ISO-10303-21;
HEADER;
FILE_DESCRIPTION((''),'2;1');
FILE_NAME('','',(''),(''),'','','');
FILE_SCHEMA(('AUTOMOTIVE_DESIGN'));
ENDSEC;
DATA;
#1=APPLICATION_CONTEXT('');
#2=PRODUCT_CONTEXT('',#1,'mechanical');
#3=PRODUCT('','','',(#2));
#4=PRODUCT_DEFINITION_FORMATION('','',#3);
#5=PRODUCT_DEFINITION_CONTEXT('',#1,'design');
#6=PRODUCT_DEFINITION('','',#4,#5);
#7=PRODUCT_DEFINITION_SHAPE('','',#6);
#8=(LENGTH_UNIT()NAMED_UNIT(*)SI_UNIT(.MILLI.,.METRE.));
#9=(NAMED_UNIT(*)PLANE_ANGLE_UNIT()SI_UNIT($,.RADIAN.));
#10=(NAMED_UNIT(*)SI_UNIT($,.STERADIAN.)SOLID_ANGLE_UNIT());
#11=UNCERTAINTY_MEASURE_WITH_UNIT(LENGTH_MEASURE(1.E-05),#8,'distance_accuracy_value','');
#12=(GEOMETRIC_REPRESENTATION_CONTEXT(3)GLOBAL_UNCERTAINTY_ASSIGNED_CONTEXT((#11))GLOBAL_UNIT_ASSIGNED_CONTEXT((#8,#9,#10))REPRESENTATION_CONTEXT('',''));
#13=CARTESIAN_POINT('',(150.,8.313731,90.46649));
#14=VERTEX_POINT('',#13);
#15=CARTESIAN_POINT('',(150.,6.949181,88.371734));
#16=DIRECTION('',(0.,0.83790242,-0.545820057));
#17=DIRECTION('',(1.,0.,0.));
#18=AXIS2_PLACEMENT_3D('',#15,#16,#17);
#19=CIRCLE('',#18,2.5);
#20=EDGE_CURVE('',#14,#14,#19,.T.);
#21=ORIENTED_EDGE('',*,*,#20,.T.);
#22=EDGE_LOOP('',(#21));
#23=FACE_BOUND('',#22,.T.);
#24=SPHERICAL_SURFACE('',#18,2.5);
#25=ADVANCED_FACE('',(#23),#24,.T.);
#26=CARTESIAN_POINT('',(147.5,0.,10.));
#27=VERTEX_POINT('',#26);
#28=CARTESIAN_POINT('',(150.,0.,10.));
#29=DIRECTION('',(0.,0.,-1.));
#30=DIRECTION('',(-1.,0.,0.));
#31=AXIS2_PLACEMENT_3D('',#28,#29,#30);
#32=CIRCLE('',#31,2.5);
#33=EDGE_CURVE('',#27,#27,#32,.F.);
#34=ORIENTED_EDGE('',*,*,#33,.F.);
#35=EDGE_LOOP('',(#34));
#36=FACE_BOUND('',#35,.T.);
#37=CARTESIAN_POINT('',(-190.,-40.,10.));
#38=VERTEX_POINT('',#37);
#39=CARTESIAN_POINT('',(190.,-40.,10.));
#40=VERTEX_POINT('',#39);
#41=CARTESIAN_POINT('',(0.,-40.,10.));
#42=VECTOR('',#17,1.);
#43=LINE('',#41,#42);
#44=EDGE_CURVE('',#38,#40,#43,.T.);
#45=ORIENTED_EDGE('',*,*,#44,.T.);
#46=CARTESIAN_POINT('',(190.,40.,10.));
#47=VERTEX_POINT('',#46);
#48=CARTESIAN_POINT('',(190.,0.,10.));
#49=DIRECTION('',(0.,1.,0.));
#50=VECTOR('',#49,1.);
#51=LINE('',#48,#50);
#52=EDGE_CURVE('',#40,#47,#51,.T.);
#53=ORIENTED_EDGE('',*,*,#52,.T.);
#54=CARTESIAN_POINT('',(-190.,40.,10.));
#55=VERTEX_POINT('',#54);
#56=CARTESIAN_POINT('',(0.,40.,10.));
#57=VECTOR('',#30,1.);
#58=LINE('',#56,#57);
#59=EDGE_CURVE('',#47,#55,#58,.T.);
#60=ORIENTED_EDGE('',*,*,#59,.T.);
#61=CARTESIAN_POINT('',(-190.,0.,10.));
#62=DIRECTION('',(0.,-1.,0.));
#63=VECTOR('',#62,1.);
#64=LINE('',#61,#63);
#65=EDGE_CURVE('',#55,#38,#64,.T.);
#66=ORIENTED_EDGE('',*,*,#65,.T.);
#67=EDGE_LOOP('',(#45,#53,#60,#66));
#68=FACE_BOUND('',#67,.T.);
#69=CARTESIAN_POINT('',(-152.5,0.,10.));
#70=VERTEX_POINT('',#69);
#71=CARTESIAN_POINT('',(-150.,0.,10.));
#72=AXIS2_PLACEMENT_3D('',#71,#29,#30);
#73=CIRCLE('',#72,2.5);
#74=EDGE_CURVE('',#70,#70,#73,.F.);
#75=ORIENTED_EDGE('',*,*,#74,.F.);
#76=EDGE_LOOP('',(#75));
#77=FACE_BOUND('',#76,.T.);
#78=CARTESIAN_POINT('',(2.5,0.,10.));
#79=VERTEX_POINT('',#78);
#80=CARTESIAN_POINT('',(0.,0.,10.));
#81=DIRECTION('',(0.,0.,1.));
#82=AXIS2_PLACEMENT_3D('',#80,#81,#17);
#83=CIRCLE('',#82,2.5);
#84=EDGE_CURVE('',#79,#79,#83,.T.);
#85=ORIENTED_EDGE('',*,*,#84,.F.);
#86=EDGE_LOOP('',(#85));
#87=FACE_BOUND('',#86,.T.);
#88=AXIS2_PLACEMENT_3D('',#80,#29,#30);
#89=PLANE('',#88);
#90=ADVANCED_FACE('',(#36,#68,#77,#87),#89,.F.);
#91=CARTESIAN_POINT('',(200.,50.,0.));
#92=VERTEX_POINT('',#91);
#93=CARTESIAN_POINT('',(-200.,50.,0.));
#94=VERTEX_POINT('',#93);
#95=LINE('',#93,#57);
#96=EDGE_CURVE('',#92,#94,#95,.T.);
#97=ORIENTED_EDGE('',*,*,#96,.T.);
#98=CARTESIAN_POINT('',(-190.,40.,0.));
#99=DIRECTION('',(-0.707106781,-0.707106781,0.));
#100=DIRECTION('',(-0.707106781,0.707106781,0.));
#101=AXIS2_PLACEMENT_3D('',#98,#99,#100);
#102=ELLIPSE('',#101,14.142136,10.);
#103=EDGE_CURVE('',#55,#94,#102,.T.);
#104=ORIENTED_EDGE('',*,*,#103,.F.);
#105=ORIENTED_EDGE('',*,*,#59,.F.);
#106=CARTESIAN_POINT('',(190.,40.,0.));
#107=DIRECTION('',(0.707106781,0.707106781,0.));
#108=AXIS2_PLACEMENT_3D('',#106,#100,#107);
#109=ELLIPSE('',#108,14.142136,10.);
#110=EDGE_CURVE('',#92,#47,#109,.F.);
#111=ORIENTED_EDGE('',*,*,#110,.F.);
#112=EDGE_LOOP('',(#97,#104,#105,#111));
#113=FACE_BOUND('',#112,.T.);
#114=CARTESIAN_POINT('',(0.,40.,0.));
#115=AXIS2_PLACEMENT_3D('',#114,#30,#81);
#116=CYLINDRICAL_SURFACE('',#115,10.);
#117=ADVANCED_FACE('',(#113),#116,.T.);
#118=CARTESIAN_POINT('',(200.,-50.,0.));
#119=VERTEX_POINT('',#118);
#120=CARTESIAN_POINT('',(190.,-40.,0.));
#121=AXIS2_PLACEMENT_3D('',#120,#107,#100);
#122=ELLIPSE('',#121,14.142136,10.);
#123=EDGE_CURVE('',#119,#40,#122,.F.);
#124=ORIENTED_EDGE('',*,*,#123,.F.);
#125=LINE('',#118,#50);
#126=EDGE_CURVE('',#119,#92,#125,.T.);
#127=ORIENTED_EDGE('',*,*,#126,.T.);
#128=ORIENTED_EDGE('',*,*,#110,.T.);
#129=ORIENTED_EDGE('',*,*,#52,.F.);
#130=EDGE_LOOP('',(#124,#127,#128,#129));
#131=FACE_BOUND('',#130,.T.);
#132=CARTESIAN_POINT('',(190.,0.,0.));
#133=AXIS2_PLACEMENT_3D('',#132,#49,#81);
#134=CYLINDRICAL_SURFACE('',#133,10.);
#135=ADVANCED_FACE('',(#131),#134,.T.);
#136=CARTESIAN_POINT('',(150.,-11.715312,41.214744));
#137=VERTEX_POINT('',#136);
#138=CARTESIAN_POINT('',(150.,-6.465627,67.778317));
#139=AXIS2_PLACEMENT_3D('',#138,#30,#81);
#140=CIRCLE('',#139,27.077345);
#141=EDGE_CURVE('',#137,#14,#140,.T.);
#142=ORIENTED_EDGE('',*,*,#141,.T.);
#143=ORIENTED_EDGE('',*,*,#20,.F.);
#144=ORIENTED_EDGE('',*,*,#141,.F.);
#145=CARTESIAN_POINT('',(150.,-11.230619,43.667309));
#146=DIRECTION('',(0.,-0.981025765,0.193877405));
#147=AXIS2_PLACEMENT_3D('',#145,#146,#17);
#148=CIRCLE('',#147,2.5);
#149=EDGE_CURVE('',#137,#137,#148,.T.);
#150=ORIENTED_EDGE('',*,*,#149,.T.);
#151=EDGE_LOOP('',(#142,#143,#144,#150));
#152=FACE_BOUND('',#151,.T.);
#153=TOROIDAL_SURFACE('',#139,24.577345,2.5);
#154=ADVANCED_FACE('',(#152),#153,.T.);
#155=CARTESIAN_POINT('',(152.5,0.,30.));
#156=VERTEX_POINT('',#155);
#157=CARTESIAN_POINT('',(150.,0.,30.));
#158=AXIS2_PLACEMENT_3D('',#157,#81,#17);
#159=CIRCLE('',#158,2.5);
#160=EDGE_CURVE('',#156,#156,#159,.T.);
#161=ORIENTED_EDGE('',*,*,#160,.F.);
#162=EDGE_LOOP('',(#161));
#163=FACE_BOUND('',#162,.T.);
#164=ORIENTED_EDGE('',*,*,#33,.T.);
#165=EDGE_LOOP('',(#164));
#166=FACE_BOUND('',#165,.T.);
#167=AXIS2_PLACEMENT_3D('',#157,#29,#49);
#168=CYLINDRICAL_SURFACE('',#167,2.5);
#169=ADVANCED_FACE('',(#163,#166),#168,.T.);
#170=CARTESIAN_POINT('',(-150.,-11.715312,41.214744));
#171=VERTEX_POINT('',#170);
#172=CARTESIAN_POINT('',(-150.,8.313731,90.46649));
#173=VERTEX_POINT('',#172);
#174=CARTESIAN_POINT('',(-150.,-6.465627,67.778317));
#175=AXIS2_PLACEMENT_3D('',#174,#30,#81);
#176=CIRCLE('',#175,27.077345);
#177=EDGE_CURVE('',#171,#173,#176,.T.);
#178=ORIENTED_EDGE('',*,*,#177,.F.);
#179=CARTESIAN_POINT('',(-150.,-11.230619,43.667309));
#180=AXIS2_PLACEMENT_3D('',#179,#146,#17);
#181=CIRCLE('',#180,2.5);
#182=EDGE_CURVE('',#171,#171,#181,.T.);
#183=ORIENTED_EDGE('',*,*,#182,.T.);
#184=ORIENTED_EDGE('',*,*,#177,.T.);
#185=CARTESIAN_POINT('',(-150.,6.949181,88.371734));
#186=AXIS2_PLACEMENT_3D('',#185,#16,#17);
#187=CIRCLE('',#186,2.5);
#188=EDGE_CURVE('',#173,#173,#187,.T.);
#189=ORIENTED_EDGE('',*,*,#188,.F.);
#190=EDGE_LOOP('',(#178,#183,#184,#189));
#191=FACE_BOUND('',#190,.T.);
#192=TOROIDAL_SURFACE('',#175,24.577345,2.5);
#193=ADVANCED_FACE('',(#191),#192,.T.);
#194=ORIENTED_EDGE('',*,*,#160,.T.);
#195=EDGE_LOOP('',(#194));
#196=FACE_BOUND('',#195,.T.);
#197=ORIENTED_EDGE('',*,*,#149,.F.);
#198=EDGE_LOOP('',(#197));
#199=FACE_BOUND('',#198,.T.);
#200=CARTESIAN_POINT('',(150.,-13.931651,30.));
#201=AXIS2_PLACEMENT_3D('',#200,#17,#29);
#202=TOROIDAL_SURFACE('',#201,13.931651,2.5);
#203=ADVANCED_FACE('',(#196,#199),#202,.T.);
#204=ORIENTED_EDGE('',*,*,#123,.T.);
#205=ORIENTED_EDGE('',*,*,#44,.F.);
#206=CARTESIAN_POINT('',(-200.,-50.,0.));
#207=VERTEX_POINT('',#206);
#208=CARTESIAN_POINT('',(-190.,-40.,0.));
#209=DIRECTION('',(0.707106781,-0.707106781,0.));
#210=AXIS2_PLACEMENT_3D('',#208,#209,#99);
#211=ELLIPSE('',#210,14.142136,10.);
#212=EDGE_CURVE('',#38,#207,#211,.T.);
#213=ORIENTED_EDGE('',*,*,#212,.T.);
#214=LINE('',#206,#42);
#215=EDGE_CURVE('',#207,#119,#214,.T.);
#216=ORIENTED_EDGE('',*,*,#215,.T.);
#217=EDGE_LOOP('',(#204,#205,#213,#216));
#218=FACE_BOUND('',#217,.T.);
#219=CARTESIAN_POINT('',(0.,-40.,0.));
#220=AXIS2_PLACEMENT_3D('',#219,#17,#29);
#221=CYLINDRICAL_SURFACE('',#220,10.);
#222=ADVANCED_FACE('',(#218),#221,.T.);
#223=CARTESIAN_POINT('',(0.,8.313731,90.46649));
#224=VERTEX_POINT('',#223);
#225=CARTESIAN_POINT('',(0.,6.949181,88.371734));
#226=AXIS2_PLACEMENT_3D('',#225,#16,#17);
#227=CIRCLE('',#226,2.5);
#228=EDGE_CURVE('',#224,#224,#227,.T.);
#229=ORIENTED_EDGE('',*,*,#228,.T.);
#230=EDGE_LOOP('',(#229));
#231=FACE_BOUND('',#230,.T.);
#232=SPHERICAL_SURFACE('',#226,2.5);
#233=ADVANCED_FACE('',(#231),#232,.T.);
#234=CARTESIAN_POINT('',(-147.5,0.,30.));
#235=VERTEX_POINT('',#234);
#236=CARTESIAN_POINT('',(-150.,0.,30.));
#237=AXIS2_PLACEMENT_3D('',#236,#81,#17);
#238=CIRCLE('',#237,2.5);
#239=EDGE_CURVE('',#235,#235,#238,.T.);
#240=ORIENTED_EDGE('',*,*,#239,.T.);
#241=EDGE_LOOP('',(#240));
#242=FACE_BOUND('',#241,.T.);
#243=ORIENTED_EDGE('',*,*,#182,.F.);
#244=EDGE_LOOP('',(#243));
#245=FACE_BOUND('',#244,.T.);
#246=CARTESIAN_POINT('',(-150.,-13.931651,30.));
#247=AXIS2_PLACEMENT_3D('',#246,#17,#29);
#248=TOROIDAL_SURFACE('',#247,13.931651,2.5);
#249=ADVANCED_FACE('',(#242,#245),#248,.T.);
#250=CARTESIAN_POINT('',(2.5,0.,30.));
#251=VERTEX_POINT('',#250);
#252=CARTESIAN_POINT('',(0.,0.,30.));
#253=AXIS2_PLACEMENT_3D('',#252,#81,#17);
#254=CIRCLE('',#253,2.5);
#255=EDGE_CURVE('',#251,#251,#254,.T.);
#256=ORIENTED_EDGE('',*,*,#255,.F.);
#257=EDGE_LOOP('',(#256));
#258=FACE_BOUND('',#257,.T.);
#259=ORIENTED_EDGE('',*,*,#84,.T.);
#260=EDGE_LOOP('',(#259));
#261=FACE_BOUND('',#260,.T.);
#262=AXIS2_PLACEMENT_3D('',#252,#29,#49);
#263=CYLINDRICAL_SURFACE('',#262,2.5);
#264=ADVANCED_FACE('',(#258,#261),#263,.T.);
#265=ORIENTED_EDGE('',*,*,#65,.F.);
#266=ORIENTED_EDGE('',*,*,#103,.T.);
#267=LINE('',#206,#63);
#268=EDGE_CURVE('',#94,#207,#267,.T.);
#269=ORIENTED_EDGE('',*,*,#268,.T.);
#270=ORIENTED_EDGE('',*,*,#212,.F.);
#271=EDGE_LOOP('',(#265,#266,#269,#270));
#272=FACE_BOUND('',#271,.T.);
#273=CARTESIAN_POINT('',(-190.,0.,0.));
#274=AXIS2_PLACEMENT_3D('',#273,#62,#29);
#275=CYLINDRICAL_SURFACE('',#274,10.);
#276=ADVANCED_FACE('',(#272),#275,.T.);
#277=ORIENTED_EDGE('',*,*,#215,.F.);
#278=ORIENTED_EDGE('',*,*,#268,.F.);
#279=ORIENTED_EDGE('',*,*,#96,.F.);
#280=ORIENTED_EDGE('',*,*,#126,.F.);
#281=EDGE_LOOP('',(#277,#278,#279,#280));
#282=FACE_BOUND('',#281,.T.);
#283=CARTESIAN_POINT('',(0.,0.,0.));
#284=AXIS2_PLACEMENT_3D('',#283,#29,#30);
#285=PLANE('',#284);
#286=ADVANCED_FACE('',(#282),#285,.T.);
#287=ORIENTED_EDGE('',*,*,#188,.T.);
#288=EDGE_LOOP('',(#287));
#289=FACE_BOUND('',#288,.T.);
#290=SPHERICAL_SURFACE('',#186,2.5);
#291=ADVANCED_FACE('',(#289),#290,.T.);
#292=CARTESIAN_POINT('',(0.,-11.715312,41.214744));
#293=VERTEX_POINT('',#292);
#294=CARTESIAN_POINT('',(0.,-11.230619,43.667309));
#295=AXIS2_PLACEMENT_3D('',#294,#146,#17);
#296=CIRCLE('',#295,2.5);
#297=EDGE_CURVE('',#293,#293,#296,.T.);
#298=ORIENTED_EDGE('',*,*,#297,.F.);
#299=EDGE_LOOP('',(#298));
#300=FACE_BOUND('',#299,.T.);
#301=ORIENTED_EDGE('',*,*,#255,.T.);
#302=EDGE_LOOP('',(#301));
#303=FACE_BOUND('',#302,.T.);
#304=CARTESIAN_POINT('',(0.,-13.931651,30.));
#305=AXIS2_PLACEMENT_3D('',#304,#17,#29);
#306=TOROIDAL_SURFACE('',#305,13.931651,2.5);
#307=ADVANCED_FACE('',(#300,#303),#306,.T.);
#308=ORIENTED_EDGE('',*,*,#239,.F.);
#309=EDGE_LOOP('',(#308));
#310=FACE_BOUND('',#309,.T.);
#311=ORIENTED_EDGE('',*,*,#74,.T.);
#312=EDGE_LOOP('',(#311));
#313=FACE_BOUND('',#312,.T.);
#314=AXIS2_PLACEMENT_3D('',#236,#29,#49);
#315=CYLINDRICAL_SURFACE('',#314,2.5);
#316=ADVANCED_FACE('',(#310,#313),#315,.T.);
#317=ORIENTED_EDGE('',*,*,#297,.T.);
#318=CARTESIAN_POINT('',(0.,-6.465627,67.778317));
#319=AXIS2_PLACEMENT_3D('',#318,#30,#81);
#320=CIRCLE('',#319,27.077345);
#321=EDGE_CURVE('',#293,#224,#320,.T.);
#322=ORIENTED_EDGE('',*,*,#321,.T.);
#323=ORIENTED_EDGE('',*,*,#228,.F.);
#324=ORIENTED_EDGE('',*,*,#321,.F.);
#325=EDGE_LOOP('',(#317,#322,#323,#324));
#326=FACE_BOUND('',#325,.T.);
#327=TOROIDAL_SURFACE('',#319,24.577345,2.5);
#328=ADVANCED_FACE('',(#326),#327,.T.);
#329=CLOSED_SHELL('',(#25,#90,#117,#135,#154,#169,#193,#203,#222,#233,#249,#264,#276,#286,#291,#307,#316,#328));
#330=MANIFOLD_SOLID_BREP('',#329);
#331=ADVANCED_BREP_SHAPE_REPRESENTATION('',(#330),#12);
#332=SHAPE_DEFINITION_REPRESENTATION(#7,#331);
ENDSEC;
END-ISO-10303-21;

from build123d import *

# Parameters (mm, degrees)
CROQUIS1_W                  = 400
CROQUIS1_H                  = 100
SALIENTE_EXTRUIR1_DEPTH     = 10
REDONDEO1_R                 = 10
CROQUIS2_R                  = 2.5
C_PULA1_FACE_RADIUS         = 2.5
C_PULA1_HEIGHT              = 2.5
MATRIZL3_COUNT              = 2
MATRIZL3_PITCH              = 150
MATRIZL3_COPY_1_FACE_RADIUS = 2.5
MATRIZL3_COPY_1_HEIGHT      = 2.5
MATRIZL4_COUNT              = 2
MATRIZL4_PITCH              = 150
MATRIZL4_COPY_1_FACE_RADIUS = 2.5
MATRIZL4_COPY_1_HEIGHT      = 2.5


with BuildPart() as part:
    # Croquis1 → Saliente-Extruir1 (new body)
    with BuildSketch(Plane.XY):
        Rectangle(CROQUIS1_W, CROQUIS1_H)
    extrude(amount=SALIENTE_EXTRUIR1_DEPTH)

    # Redondeo1
    redondeo1_edges = [part.edges().sort_by_distance(p)[0] for p in [
        (0, -50, 10),
        (-200, 0, 10),
        (0, 50, 10),
        (200, 0, 10),
    ]]
    fillet(redondeo1_edges, radius=REDONDEO1_R - 0.0001)  # a hair under: the kernel refuses the full size

    # Barrer1: sweep along a path in Croquis3
    with BuildLine(Plane(origin=(0, 0, 0), x_dir=(0, 0, -1), z_dir=(1, 0, 0))) as barrer1_path:
        Line((-10, 0), (-30, 0))
        ThreePointArc((-30, 0), (-38.844802549, -3.167805556), (-43.667308782, -11.230618826))
        ThreePointArc((-43.667308782, -11.230618826), (-77.036807223, -29.232406086), (-88.371733594, 6.949180598))
    # Croquis2 → Barrer1 (sweep)
    with BuildSketch(Plane.XY.offset(10)):
        Circle(CROQUIS2_R)
    barrer1 = sweep(path=barrer1_path.line)

    # Cúpula1: a dome of height H over a round flat face of radius A is a cap of a sphere of radius (A * A + H * H) / (2 * H)
    c_pula1_r = (C_PULA1_FACE_RADIUS * C_PULA1_FACE_RADIUS + C_PULA1_HEIGHT * C_PULA1_HEIGHT) / (2 * C_PULA1_HEIGHT)
    c_pula1_base = Plane((0, 6.949180598, 88.371733594), z_dir=(0, 0.83790241978, -0.545820057277))
    with Locations(c_pula1_base.offset(C_PULA1_HEIGHT - c_pula1_r)):
        c_pula1_ball = Sphere(c_pula1_r, mode=Mode.PRIVATE)
    add(split(c_pula1_ball, bisect_by=c_pula1_base, keep=Keep.TOP, mode=Mode.PRIVATE))

    # MatrizL3: Barrer1 ×2
    with Locations(*[(i * MATRIZL3_PITCH, 0, 0) for i in range(1, MATRIZL3_COUNT)]):
        add(barrer1)

    # MatrizL3 copy 1: a dome of height H over a round flat face of radius A is a cap of a sphere of radius (A * A + H * H) / (2 * H)
    matrizl3_copy_1_r = (MATRIZL3_COPY_1_FACE_RADIUS * MATRIZL3_COPY_1_FACE_RADIUS + MATRIZL3_COPY_1_HEIGHT * MATRIZL3_COPY_1_HEIGHT) / (2 * MATRIZL3_COPY_1_HEIGHT)
    matrizl3_copy_1_base = Plane((150, 6.949180598, 88.371733594), z_dir=(0, 0.83790241978, -0.545820057277))
    with Locations(matrizl3_copy_1_base.offset(MATRIZL3_COPY_1_HEIGHT - matrizl3_copy_1_r)):
        matrizl3_copy_1_ball = Sphere(matrizl3_copy_1_r, mode=Mode.PRIVATE)
    add(split(matrizl3_copy_1_ball, bisect_by=matrizl3_copy_1_base, keep=Keep.TOP, mode=Mode.PRIVATE))

    # MatrizL4: Barrer1 ×2
    with Locations(*[(-i * MATRIZL4_PITCH, 0, 0) for i in range(1, MATRIZL4_COUNT)]):
        add(barrer1)

    # MatrizL4 copy 1: a dome of height H over a round flat face of radius A is a cap of a sphere of radius (A * A + H * H) / (2 * H)
    matrizl4_copy_1_r = (MATRIZL4_COPY_1_FACE_RADIUS * MATRIZL4_COPY_1_FACE_RADIUS + MATRIZL4_COPY_1_HEIGHT * MATRIZL4_COPY_1_HEIGHT) / (2 * MATRIZL4_COPY_1_HEIGHT)
    matrizl4_copy_1_base = Plane((-150, 6.949180598, 88.371733594), z_dir=(0, 0.83790241978, -0.545820057277))
    with Locations(matrizl4_copy_1_base.offset(MATRIZL4_COPY_1_HEIGHT - matrizl4_copy_1_r)):
        matrizl4_copy_1_ball = Sphere(matrizl4_copy_1_r, mode=Mode.PRIVATE)
    add(split(matrizl4_copy_1_ball, bisect_by=matrizl4_copy_1_base, keep=Keep.TOP, mode=Mode.PRIVATE))


solid = part.part
